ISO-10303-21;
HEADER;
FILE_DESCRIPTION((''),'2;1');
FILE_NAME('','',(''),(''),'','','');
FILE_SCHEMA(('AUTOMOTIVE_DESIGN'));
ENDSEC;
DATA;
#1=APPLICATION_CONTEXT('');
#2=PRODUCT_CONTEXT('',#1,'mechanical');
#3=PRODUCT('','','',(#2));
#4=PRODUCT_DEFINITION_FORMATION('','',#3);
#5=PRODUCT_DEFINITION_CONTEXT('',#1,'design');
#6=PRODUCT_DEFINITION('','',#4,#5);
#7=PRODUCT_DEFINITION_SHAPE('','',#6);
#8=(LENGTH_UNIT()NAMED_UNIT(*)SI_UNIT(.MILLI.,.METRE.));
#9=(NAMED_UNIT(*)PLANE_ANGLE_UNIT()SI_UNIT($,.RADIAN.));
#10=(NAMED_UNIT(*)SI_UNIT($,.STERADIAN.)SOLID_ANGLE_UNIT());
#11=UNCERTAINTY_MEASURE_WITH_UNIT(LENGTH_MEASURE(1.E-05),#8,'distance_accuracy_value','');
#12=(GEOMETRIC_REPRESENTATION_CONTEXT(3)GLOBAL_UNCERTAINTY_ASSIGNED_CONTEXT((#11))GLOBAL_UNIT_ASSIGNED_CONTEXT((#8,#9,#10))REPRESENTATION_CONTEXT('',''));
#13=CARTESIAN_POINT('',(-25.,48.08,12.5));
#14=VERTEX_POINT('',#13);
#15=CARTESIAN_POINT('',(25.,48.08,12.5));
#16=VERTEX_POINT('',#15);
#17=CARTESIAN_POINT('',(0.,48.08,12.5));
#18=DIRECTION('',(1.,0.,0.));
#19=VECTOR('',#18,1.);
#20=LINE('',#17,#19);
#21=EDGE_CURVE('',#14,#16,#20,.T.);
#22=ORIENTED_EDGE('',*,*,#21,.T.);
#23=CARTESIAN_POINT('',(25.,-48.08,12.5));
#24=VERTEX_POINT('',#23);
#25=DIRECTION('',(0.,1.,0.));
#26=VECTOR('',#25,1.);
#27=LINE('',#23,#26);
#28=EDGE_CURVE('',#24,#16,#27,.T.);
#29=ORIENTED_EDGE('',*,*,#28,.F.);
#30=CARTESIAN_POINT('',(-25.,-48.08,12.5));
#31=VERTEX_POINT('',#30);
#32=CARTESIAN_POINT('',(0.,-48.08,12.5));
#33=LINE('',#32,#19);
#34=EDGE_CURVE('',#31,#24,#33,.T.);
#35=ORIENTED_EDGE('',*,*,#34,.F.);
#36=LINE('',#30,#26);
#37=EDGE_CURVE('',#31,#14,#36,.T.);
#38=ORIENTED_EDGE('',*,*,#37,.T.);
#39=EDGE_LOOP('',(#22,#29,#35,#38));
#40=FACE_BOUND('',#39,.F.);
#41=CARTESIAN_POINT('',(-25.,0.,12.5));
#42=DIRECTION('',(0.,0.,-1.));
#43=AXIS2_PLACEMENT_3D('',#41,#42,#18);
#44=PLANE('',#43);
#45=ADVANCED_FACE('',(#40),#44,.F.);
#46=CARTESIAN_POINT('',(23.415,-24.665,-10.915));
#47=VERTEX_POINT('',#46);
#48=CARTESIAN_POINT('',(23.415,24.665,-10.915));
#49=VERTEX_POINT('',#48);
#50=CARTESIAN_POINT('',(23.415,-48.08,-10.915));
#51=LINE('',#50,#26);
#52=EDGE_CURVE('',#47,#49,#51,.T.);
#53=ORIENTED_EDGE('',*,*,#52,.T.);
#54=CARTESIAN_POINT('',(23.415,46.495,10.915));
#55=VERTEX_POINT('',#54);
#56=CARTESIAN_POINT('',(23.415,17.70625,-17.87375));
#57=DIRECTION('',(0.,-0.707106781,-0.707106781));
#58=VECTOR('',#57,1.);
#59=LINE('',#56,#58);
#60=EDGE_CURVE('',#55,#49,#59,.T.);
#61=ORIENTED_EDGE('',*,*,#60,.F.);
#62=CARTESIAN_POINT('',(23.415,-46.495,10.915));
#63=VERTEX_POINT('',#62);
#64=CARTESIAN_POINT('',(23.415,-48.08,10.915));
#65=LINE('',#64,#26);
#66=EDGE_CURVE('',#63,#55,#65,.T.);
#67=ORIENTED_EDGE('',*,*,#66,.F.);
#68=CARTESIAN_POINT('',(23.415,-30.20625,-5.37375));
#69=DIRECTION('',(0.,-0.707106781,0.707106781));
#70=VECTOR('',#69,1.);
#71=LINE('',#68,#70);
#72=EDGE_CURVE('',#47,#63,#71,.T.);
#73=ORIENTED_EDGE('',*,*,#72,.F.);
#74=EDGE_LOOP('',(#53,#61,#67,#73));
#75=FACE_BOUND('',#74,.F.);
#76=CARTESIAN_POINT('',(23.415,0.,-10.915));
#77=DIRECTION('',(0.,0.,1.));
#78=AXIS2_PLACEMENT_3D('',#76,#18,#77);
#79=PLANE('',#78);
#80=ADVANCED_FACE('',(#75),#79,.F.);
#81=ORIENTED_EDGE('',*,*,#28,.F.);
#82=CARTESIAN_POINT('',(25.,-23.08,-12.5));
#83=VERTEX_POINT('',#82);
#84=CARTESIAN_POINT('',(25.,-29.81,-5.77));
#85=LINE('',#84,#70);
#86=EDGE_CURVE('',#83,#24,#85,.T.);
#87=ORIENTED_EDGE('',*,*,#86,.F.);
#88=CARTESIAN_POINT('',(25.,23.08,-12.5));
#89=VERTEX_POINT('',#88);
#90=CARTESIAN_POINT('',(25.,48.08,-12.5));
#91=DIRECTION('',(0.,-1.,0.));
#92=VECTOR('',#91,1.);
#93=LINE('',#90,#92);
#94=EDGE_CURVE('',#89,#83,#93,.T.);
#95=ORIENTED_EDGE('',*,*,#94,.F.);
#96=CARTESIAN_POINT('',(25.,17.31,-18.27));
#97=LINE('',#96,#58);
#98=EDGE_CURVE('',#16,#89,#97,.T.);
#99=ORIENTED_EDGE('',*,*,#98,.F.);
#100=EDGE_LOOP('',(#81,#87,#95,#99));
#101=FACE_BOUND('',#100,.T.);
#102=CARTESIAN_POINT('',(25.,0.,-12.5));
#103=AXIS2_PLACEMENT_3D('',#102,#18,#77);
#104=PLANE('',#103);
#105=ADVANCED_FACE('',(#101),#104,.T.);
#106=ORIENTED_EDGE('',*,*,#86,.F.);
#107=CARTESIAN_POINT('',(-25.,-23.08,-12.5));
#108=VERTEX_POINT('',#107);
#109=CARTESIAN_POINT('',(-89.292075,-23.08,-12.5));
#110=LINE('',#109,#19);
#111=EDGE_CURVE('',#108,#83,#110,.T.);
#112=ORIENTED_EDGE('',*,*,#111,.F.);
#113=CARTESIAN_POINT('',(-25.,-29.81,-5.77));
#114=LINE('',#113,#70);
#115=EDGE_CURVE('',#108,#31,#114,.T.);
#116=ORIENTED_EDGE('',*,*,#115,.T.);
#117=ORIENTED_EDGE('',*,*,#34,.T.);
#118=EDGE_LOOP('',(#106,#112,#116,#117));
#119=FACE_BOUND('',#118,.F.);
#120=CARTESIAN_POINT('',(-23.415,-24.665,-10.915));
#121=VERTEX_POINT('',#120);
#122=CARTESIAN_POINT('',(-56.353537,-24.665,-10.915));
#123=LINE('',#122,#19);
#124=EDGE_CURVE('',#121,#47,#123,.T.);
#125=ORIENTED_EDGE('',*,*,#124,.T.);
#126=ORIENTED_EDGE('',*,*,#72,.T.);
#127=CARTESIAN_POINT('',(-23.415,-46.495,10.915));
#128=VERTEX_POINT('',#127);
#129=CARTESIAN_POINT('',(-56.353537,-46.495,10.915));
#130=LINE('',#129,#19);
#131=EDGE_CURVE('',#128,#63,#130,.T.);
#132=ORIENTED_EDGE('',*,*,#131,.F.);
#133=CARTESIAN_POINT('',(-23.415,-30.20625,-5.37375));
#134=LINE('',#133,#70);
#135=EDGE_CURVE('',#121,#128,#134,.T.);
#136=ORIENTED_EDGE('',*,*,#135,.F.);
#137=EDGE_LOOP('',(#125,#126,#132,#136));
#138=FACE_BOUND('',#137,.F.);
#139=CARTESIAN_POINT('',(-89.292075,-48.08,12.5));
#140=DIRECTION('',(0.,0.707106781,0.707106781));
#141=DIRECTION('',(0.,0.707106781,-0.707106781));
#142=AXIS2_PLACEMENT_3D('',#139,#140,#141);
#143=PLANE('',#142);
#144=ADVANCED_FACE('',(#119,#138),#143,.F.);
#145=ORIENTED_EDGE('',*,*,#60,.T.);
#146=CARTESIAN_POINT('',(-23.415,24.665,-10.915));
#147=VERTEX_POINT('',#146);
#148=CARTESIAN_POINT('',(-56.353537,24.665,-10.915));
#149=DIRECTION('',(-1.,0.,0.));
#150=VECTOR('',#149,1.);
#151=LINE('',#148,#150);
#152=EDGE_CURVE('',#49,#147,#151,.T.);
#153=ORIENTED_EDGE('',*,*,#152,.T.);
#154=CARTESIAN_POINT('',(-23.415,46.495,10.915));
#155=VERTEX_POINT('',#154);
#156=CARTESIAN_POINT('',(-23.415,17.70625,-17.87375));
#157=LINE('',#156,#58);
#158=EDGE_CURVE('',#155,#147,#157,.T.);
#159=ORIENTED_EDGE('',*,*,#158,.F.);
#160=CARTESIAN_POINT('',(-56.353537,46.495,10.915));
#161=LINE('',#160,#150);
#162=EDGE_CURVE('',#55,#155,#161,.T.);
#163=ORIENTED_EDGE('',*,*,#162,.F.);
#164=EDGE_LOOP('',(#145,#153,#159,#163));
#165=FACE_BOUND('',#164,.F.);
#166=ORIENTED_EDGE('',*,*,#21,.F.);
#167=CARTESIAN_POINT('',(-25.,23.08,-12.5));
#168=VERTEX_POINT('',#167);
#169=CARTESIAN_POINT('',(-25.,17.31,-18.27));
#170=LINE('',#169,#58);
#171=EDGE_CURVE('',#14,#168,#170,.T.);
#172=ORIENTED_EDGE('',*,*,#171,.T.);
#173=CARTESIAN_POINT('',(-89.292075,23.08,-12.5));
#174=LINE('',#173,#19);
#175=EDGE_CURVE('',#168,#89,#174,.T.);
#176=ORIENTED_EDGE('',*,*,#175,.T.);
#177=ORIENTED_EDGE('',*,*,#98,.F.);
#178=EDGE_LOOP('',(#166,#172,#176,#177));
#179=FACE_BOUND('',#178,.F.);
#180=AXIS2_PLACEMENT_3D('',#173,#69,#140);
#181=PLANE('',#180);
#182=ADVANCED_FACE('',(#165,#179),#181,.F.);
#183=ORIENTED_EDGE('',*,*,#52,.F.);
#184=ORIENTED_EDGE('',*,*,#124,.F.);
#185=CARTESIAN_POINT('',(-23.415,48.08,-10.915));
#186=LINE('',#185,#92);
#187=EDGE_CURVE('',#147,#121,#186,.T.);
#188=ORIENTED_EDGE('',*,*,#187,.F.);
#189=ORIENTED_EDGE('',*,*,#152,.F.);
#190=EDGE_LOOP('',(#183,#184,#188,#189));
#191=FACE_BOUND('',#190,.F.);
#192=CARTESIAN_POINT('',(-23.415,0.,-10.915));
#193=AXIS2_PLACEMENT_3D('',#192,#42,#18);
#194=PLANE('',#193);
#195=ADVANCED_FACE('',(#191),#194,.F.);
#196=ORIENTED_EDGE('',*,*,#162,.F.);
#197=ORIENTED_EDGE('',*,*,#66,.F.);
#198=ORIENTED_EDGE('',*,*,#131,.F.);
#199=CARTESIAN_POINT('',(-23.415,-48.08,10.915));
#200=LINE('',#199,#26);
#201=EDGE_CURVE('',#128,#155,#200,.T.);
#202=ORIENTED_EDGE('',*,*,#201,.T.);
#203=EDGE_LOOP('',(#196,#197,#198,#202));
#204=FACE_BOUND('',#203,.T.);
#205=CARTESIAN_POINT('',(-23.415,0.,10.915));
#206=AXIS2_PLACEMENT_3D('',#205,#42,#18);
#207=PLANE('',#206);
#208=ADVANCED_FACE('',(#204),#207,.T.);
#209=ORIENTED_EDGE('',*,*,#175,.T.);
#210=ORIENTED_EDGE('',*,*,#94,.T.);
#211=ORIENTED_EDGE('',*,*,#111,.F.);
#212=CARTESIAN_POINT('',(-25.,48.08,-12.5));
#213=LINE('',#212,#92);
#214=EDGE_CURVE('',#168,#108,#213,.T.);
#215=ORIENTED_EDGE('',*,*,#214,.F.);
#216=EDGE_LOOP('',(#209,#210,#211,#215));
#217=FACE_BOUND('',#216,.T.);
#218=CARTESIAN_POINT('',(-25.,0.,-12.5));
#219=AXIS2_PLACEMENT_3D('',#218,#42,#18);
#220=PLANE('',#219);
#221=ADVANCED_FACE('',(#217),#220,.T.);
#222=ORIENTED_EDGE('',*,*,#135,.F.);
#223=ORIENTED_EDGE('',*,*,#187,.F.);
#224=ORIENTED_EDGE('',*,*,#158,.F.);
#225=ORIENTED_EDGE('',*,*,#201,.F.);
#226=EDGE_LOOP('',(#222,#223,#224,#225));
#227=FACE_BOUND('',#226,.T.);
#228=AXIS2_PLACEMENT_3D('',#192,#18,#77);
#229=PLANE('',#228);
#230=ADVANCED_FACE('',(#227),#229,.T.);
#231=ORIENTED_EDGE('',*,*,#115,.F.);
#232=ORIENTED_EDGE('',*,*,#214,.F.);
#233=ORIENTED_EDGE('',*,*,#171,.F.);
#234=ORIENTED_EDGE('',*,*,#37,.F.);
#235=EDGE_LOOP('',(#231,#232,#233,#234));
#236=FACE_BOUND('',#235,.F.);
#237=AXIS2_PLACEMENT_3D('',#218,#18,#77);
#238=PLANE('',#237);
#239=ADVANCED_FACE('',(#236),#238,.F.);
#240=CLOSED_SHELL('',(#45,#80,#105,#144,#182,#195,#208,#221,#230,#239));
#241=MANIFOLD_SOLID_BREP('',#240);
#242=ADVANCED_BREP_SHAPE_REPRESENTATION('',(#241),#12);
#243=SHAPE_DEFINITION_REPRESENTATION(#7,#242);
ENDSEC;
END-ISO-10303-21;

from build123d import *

# Parameters (mm, degrees)
F0_W        = 50
F0_H        = 25
F0_W_2      = 46.83
F0_H_2      = 21.83
F1_DEPTH    = 48.08
F2_T1_DEPTH = 178.5841493983
F3_T1_DEPTH = 178.5841493983


# Not quite as in the source:
# - a fillet or chamfer that OpenCascade refuses, or shapes differently, is made with other operations: its cross-section is extruded or revolved along the edge and cut away or added


with BuildPart() as f1:
    # F0 (on Front) → F1 (new body, symmetric)
    with BuildSketch(Plane.XZ):
        Rectangle(F0_W, F0_H)
        Rectangle(F0_W_2, F0_H_2, mode=Mode.SUBTRACT)
    extrude(amount=F1_DEPTH, both=True)

    # F2: chamfer of 25 on 1 edges, made by hand

    # F2_s2 → F2_t1 (cut)
    with BuildSketch(Plane.YZ.offset(-89.2920746991)):
        Polygon((-48.08, 12.5), (-23.08, -12.5), (-48.08, -12.5), align=None)
    extrude(amount=F2_T1_DEPTH, mode=Mode.SUBTRACT)

    # F3: chamfer of 25 on 1 edges, made by hand

    # F3_s2 → F3_t1 (cut)
    with BuildSketch(Plane.YZ.offset(-89.2920746991)):
        Polygon((23.08, -12.5), (48.08, 12.5), (48.08, -12.5), align=None)
    extrude(amount=F3_T1_DEPTH, mode=Mode.SUBTRACT)


solid = f1.part
